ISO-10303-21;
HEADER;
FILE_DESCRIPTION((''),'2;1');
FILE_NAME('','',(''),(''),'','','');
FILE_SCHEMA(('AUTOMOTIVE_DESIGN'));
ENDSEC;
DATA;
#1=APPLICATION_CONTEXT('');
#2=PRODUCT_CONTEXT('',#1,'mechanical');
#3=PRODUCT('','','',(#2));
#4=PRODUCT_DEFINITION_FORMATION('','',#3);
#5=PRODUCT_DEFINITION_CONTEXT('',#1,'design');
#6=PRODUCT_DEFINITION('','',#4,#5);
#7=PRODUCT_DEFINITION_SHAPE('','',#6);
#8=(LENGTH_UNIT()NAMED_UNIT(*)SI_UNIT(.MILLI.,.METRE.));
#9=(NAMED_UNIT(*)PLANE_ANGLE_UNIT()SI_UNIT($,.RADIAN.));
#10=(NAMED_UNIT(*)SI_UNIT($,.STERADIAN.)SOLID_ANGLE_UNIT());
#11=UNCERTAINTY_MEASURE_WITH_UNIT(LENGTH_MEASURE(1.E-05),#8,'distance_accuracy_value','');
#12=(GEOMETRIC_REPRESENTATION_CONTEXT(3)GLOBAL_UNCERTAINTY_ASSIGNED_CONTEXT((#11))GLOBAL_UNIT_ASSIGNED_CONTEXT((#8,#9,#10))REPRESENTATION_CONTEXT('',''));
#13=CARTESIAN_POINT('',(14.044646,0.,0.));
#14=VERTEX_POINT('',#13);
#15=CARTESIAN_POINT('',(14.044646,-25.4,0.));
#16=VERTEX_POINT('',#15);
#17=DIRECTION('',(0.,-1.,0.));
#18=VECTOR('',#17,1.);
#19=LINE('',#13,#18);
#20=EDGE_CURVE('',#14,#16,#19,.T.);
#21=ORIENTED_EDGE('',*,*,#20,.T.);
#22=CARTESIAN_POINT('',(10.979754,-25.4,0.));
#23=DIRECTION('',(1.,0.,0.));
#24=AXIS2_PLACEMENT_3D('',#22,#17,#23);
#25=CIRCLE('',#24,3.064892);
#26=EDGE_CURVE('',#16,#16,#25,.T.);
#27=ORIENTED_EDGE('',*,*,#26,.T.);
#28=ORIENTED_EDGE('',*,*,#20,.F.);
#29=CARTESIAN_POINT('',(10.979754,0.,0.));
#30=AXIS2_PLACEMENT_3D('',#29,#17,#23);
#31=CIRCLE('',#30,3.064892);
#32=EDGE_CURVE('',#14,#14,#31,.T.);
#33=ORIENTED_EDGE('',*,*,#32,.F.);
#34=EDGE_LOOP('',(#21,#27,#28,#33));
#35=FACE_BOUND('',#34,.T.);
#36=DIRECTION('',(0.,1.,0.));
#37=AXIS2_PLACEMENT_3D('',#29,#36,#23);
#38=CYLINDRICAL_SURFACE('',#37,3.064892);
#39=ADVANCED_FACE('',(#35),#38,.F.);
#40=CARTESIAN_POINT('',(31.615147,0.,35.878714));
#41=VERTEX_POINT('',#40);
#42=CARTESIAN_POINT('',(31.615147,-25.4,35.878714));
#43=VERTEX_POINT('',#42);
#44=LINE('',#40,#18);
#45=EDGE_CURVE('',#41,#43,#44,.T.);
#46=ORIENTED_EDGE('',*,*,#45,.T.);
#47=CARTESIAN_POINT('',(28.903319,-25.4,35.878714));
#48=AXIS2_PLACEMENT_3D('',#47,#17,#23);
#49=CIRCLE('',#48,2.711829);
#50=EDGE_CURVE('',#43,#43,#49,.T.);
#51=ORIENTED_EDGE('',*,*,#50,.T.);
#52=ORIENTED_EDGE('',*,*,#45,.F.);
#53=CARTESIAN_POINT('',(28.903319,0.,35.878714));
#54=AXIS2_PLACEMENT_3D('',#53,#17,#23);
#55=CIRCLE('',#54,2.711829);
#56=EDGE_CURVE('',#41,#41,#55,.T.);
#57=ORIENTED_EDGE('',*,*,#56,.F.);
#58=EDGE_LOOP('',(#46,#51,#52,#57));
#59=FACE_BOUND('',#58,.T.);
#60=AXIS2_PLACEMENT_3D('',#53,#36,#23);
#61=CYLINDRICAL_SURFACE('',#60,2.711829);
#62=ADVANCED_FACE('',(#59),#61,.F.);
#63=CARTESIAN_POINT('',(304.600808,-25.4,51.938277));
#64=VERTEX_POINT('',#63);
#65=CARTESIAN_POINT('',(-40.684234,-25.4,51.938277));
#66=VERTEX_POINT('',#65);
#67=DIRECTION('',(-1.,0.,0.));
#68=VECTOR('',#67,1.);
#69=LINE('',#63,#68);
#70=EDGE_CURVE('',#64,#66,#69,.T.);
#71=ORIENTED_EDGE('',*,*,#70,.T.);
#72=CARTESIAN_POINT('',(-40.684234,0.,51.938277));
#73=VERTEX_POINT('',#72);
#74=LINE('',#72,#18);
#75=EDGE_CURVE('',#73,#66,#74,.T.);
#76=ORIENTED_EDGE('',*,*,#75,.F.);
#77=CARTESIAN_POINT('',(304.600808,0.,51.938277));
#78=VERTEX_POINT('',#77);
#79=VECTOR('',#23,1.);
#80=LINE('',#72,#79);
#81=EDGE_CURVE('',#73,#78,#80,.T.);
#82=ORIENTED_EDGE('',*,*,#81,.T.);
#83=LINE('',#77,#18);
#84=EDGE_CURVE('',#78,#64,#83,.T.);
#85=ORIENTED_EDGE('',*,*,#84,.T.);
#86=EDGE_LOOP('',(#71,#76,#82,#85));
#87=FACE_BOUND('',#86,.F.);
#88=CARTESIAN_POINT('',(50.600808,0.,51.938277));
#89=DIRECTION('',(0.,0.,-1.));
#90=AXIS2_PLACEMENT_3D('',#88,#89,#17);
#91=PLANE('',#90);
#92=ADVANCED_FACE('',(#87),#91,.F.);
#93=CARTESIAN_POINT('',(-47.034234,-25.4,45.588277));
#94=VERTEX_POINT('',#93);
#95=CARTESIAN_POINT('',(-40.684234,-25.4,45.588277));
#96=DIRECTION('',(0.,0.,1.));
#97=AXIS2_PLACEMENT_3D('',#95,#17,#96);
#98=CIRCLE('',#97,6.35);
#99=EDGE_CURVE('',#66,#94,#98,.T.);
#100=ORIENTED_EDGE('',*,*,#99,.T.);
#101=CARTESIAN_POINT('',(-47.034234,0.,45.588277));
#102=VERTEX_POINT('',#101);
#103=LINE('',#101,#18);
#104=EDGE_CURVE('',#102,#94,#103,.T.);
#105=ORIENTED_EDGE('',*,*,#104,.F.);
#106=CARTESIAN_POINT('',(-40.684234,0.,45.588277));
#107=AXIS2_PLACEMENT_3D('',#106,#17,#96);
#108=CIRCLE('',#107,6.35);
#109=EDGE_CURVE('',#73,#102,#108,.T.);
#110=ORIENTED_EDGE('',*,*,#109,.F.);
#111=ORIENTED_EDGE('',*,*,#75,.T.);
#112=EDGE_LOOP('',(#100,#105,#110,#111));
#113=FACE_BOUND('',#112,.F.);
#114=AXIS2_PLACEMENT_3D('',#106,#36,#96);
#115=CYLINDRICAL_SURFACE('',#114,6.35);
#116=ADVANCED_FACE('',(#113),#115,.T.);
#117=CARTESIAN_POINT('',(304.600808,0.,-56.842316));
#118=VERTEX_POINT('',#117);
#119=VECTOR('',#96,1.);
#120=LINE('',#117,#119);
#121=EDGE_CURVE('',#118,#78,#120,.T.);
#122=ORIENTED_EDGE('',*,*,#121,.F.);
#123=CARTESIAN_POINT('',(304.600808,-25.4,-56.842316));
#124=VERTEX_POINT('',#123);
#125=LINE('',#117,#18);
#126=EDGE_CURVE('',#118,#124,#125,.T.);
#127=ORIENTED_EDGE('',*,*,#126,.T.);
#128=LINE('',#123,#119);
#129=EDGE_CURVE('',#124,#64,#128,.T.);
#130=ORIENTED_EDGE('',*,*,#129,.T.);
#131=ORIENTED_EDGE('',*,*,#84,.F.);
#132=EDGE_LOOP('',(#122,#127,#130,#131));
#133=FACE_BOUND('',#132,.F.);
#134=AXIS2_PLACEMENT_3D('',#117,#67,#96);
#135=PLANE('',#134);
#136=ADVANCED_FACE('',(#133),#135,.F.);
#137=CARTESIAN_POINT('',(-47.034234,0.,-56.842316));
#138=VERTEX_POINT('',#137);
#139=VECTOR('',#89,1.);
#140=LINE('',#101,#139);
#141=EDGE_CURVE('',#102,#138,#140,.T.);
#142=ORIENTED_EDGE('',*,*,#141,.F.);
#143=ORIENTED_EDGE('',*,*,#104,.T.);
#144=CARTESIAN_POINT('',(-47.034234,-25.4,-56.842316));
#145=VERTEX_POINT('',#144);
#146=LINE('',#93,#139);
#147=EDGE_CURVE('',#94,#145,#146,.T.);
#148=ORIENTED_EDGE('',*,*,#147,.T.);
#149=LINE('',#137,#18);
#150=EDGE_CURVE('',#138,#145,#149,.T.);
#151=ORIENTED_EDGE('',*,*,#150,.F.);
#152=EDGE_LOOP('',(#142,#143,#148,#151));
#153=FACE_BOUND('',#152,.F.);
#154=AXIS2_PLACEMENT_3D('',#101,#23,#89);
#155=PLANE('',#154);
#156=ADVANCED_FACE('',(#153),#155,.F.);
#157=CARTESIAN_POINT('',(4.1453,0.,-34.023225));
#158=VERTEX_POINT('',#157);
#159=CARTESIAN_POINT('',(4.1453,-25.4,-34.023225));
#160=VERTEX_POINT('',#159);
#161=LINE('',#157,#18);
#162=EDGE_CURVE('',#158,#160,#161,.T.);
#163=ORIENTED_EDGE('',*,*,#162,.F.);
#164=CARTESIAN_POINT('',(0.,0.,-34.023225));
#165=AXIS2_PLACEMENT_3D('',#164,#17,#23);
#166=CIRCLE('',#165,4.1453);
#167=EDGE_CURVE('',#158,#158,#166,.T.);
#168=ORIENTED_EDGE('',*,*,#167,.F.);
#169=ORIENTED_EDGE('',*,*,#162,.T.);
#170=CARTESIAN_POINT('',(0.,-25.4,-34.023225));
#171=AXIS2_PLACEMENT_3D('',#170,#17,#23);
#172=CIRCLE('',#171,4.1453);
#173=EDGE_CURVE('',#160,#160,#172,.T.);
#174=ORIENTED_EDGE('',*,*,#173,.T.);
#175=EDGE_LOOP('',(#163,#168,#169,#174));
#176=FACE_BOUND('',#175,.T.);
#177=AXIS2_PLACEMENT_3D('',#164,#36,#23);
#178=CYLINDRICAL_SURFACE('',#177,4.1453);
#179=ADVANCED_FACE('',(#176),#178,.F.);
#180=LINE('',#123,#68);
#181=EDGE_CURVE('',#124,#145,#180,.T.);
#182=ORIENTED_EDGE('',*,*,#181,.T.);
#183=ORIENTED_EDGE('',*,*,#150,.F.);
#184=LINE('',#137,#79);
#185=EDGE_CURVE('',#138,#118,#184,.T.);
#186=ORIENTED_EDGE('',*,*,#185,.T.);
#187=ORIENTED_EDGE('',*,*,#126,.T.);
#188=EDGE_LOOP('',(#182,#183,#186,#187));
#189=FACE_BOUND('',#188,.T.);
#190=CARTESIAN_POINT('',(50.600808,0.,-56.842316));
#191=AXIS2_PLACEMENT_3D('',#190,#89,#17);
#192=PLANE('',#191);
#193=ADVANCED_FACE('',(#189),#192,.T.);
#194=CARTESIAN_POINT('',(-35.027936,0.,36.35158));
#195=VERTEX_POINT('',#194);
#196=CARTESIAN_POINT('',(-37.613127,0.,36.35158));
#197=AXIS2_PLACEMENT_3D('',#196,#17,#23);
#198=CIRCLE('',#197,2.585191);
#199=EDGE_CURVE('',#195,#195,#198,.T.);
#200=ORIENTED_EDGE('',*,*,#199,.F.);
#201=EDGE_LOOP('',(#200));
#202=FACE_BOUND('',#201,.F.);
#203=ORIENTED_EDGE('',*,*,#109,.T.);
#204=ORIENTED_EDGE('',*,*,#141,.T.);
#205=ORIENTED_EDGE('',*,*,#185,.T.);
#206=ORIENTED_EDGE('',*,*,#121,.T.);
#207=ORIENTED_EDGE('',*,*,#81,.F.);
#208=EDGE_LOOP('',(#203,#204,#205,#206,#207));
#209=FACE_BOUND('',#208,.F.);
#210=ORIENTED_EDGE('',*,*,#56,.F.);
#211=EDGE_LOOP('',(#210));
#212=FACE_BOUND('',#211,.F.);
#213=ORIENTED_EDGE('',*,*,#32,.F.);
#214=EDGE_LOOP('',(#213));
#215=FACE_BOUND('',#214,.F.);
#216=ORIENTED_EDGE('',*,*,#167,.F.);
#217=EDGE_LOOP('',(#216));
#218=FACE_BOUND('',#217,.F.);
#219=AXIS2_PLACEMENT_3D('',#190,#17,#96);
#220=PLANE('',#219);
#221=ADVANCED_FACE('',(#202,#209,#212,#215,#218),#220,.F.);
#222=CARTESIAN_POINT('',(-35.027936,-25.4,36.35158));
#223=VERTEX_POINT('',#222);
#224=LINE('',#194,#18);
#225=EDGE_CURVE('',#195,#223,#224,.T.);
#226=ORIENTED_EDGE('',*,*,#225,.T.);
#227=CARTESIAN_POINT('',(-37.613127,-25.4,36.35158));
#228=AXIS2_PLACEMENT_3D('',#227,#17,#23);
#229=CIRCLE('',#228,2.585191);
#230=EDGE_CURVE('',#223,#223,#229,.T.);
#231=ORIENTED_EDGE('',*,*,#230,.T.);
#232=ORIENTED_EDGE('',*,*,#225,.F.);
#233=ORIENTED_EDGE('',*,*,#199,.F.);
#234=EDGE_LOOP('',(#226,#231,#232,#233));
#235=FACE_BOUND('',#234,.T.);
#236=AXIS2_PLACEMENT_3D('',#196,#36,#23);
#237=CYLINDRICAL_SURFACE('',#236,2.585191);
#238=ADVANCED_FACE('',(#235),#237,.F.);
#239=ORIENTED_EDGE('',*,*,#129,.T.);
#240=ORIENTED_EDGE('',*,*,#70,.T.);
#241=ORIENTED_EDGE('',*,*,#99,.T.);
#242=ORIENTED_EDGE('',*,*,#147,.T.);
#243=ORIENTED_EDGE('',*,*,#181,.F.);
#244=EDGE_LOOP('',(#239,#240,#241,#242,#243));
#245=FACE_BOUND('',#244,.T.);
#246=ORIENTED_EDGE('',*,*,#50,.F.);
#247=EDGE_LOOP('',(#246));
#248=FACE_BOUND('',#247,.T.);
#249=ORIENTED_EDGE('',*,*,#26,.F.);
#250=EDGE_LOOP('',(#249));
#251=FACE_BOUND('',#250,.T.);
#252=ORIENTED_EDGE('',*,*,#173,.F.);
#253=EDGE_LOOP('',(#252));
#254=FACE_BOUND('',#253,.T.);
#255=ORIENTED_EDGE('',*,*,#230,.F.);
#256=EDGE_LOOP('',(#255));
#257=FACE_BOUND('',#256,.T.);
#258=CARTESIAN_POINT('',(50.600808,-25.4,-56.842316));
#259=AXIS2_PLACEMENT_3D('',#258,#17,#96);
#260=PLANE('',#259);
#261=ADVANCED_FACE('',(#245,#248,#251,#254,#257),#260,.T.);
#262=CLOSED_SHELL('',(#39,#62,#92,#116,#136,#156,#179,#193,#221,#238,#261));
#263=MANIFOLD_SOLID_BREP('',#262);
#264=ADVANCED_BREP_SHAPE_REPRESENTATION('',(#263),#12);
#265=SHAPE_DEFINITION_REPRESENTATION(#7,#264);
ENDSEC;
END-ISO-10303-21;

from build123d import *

# Parameters (mm, degrees)
F0_R     = 4.145299883
F0_R_2   = 2.5851912666
F0_R_3   = 3.0648919033
F0_R_4   = 2.7118286766
F1_DEPTH = 25.4
F2_DEPTH = 254


# Not quite as in the source:
# - the program builds the solid bodies; features that only make, move or delete a surface that nothing else refers to are left out


with BuildPart() as f1:
    # F0 (on Front) → F1 (new body)
    with BuildSketch(Plane.XZ):
        with BuildLine():
            Line((50.6008081138, 51.9382767379), (-40.6842338085, 51.9382767379))
            ThreePointArc((-40.6842338085, 51.9382767379), (-45.1743618691, 50.0784047985), (-47.0342338085, 45.5882767379))
            Line((-47.0342338085, 45.5882767379), (-47.0342338085, -56.842315942))
            Line((-47.0342338085, -56.842315942), (50.6008081138, -56.842315942))
            Line((50.6008081138, -56.842315942), (50.6008081138, 51.9382767379))
        make_face()
        with Locations((0, -34.0232253075)):
            Circle(F0_R, mode=Mode.SUBTRACT)
        with Locations((-37.6131273806, 36.3515801728)):
            Circle(F0_R_2, mode=Mode.SUBTRACT)
        with Locations((10.9797539189, 0)):
            Circle(F0_R_3, mode=Mode.SUBTRACT)
        with Locations((28.9033185691, 35.878714174)):
            Circle(F0_R_4, mode=Mode.SUBTRACT)
    extrude(amount=F1_DEPTH)

    # F2 (add): a face of the model
    f2_faces = [f1.faces().sort_by_distance(p)[0] for p in [
        (50.6008081138, -12.7, -2.4520196021),
    ]]
    extrude(f2_faces, amount=F2_DEPTH)


solid = f1.part
